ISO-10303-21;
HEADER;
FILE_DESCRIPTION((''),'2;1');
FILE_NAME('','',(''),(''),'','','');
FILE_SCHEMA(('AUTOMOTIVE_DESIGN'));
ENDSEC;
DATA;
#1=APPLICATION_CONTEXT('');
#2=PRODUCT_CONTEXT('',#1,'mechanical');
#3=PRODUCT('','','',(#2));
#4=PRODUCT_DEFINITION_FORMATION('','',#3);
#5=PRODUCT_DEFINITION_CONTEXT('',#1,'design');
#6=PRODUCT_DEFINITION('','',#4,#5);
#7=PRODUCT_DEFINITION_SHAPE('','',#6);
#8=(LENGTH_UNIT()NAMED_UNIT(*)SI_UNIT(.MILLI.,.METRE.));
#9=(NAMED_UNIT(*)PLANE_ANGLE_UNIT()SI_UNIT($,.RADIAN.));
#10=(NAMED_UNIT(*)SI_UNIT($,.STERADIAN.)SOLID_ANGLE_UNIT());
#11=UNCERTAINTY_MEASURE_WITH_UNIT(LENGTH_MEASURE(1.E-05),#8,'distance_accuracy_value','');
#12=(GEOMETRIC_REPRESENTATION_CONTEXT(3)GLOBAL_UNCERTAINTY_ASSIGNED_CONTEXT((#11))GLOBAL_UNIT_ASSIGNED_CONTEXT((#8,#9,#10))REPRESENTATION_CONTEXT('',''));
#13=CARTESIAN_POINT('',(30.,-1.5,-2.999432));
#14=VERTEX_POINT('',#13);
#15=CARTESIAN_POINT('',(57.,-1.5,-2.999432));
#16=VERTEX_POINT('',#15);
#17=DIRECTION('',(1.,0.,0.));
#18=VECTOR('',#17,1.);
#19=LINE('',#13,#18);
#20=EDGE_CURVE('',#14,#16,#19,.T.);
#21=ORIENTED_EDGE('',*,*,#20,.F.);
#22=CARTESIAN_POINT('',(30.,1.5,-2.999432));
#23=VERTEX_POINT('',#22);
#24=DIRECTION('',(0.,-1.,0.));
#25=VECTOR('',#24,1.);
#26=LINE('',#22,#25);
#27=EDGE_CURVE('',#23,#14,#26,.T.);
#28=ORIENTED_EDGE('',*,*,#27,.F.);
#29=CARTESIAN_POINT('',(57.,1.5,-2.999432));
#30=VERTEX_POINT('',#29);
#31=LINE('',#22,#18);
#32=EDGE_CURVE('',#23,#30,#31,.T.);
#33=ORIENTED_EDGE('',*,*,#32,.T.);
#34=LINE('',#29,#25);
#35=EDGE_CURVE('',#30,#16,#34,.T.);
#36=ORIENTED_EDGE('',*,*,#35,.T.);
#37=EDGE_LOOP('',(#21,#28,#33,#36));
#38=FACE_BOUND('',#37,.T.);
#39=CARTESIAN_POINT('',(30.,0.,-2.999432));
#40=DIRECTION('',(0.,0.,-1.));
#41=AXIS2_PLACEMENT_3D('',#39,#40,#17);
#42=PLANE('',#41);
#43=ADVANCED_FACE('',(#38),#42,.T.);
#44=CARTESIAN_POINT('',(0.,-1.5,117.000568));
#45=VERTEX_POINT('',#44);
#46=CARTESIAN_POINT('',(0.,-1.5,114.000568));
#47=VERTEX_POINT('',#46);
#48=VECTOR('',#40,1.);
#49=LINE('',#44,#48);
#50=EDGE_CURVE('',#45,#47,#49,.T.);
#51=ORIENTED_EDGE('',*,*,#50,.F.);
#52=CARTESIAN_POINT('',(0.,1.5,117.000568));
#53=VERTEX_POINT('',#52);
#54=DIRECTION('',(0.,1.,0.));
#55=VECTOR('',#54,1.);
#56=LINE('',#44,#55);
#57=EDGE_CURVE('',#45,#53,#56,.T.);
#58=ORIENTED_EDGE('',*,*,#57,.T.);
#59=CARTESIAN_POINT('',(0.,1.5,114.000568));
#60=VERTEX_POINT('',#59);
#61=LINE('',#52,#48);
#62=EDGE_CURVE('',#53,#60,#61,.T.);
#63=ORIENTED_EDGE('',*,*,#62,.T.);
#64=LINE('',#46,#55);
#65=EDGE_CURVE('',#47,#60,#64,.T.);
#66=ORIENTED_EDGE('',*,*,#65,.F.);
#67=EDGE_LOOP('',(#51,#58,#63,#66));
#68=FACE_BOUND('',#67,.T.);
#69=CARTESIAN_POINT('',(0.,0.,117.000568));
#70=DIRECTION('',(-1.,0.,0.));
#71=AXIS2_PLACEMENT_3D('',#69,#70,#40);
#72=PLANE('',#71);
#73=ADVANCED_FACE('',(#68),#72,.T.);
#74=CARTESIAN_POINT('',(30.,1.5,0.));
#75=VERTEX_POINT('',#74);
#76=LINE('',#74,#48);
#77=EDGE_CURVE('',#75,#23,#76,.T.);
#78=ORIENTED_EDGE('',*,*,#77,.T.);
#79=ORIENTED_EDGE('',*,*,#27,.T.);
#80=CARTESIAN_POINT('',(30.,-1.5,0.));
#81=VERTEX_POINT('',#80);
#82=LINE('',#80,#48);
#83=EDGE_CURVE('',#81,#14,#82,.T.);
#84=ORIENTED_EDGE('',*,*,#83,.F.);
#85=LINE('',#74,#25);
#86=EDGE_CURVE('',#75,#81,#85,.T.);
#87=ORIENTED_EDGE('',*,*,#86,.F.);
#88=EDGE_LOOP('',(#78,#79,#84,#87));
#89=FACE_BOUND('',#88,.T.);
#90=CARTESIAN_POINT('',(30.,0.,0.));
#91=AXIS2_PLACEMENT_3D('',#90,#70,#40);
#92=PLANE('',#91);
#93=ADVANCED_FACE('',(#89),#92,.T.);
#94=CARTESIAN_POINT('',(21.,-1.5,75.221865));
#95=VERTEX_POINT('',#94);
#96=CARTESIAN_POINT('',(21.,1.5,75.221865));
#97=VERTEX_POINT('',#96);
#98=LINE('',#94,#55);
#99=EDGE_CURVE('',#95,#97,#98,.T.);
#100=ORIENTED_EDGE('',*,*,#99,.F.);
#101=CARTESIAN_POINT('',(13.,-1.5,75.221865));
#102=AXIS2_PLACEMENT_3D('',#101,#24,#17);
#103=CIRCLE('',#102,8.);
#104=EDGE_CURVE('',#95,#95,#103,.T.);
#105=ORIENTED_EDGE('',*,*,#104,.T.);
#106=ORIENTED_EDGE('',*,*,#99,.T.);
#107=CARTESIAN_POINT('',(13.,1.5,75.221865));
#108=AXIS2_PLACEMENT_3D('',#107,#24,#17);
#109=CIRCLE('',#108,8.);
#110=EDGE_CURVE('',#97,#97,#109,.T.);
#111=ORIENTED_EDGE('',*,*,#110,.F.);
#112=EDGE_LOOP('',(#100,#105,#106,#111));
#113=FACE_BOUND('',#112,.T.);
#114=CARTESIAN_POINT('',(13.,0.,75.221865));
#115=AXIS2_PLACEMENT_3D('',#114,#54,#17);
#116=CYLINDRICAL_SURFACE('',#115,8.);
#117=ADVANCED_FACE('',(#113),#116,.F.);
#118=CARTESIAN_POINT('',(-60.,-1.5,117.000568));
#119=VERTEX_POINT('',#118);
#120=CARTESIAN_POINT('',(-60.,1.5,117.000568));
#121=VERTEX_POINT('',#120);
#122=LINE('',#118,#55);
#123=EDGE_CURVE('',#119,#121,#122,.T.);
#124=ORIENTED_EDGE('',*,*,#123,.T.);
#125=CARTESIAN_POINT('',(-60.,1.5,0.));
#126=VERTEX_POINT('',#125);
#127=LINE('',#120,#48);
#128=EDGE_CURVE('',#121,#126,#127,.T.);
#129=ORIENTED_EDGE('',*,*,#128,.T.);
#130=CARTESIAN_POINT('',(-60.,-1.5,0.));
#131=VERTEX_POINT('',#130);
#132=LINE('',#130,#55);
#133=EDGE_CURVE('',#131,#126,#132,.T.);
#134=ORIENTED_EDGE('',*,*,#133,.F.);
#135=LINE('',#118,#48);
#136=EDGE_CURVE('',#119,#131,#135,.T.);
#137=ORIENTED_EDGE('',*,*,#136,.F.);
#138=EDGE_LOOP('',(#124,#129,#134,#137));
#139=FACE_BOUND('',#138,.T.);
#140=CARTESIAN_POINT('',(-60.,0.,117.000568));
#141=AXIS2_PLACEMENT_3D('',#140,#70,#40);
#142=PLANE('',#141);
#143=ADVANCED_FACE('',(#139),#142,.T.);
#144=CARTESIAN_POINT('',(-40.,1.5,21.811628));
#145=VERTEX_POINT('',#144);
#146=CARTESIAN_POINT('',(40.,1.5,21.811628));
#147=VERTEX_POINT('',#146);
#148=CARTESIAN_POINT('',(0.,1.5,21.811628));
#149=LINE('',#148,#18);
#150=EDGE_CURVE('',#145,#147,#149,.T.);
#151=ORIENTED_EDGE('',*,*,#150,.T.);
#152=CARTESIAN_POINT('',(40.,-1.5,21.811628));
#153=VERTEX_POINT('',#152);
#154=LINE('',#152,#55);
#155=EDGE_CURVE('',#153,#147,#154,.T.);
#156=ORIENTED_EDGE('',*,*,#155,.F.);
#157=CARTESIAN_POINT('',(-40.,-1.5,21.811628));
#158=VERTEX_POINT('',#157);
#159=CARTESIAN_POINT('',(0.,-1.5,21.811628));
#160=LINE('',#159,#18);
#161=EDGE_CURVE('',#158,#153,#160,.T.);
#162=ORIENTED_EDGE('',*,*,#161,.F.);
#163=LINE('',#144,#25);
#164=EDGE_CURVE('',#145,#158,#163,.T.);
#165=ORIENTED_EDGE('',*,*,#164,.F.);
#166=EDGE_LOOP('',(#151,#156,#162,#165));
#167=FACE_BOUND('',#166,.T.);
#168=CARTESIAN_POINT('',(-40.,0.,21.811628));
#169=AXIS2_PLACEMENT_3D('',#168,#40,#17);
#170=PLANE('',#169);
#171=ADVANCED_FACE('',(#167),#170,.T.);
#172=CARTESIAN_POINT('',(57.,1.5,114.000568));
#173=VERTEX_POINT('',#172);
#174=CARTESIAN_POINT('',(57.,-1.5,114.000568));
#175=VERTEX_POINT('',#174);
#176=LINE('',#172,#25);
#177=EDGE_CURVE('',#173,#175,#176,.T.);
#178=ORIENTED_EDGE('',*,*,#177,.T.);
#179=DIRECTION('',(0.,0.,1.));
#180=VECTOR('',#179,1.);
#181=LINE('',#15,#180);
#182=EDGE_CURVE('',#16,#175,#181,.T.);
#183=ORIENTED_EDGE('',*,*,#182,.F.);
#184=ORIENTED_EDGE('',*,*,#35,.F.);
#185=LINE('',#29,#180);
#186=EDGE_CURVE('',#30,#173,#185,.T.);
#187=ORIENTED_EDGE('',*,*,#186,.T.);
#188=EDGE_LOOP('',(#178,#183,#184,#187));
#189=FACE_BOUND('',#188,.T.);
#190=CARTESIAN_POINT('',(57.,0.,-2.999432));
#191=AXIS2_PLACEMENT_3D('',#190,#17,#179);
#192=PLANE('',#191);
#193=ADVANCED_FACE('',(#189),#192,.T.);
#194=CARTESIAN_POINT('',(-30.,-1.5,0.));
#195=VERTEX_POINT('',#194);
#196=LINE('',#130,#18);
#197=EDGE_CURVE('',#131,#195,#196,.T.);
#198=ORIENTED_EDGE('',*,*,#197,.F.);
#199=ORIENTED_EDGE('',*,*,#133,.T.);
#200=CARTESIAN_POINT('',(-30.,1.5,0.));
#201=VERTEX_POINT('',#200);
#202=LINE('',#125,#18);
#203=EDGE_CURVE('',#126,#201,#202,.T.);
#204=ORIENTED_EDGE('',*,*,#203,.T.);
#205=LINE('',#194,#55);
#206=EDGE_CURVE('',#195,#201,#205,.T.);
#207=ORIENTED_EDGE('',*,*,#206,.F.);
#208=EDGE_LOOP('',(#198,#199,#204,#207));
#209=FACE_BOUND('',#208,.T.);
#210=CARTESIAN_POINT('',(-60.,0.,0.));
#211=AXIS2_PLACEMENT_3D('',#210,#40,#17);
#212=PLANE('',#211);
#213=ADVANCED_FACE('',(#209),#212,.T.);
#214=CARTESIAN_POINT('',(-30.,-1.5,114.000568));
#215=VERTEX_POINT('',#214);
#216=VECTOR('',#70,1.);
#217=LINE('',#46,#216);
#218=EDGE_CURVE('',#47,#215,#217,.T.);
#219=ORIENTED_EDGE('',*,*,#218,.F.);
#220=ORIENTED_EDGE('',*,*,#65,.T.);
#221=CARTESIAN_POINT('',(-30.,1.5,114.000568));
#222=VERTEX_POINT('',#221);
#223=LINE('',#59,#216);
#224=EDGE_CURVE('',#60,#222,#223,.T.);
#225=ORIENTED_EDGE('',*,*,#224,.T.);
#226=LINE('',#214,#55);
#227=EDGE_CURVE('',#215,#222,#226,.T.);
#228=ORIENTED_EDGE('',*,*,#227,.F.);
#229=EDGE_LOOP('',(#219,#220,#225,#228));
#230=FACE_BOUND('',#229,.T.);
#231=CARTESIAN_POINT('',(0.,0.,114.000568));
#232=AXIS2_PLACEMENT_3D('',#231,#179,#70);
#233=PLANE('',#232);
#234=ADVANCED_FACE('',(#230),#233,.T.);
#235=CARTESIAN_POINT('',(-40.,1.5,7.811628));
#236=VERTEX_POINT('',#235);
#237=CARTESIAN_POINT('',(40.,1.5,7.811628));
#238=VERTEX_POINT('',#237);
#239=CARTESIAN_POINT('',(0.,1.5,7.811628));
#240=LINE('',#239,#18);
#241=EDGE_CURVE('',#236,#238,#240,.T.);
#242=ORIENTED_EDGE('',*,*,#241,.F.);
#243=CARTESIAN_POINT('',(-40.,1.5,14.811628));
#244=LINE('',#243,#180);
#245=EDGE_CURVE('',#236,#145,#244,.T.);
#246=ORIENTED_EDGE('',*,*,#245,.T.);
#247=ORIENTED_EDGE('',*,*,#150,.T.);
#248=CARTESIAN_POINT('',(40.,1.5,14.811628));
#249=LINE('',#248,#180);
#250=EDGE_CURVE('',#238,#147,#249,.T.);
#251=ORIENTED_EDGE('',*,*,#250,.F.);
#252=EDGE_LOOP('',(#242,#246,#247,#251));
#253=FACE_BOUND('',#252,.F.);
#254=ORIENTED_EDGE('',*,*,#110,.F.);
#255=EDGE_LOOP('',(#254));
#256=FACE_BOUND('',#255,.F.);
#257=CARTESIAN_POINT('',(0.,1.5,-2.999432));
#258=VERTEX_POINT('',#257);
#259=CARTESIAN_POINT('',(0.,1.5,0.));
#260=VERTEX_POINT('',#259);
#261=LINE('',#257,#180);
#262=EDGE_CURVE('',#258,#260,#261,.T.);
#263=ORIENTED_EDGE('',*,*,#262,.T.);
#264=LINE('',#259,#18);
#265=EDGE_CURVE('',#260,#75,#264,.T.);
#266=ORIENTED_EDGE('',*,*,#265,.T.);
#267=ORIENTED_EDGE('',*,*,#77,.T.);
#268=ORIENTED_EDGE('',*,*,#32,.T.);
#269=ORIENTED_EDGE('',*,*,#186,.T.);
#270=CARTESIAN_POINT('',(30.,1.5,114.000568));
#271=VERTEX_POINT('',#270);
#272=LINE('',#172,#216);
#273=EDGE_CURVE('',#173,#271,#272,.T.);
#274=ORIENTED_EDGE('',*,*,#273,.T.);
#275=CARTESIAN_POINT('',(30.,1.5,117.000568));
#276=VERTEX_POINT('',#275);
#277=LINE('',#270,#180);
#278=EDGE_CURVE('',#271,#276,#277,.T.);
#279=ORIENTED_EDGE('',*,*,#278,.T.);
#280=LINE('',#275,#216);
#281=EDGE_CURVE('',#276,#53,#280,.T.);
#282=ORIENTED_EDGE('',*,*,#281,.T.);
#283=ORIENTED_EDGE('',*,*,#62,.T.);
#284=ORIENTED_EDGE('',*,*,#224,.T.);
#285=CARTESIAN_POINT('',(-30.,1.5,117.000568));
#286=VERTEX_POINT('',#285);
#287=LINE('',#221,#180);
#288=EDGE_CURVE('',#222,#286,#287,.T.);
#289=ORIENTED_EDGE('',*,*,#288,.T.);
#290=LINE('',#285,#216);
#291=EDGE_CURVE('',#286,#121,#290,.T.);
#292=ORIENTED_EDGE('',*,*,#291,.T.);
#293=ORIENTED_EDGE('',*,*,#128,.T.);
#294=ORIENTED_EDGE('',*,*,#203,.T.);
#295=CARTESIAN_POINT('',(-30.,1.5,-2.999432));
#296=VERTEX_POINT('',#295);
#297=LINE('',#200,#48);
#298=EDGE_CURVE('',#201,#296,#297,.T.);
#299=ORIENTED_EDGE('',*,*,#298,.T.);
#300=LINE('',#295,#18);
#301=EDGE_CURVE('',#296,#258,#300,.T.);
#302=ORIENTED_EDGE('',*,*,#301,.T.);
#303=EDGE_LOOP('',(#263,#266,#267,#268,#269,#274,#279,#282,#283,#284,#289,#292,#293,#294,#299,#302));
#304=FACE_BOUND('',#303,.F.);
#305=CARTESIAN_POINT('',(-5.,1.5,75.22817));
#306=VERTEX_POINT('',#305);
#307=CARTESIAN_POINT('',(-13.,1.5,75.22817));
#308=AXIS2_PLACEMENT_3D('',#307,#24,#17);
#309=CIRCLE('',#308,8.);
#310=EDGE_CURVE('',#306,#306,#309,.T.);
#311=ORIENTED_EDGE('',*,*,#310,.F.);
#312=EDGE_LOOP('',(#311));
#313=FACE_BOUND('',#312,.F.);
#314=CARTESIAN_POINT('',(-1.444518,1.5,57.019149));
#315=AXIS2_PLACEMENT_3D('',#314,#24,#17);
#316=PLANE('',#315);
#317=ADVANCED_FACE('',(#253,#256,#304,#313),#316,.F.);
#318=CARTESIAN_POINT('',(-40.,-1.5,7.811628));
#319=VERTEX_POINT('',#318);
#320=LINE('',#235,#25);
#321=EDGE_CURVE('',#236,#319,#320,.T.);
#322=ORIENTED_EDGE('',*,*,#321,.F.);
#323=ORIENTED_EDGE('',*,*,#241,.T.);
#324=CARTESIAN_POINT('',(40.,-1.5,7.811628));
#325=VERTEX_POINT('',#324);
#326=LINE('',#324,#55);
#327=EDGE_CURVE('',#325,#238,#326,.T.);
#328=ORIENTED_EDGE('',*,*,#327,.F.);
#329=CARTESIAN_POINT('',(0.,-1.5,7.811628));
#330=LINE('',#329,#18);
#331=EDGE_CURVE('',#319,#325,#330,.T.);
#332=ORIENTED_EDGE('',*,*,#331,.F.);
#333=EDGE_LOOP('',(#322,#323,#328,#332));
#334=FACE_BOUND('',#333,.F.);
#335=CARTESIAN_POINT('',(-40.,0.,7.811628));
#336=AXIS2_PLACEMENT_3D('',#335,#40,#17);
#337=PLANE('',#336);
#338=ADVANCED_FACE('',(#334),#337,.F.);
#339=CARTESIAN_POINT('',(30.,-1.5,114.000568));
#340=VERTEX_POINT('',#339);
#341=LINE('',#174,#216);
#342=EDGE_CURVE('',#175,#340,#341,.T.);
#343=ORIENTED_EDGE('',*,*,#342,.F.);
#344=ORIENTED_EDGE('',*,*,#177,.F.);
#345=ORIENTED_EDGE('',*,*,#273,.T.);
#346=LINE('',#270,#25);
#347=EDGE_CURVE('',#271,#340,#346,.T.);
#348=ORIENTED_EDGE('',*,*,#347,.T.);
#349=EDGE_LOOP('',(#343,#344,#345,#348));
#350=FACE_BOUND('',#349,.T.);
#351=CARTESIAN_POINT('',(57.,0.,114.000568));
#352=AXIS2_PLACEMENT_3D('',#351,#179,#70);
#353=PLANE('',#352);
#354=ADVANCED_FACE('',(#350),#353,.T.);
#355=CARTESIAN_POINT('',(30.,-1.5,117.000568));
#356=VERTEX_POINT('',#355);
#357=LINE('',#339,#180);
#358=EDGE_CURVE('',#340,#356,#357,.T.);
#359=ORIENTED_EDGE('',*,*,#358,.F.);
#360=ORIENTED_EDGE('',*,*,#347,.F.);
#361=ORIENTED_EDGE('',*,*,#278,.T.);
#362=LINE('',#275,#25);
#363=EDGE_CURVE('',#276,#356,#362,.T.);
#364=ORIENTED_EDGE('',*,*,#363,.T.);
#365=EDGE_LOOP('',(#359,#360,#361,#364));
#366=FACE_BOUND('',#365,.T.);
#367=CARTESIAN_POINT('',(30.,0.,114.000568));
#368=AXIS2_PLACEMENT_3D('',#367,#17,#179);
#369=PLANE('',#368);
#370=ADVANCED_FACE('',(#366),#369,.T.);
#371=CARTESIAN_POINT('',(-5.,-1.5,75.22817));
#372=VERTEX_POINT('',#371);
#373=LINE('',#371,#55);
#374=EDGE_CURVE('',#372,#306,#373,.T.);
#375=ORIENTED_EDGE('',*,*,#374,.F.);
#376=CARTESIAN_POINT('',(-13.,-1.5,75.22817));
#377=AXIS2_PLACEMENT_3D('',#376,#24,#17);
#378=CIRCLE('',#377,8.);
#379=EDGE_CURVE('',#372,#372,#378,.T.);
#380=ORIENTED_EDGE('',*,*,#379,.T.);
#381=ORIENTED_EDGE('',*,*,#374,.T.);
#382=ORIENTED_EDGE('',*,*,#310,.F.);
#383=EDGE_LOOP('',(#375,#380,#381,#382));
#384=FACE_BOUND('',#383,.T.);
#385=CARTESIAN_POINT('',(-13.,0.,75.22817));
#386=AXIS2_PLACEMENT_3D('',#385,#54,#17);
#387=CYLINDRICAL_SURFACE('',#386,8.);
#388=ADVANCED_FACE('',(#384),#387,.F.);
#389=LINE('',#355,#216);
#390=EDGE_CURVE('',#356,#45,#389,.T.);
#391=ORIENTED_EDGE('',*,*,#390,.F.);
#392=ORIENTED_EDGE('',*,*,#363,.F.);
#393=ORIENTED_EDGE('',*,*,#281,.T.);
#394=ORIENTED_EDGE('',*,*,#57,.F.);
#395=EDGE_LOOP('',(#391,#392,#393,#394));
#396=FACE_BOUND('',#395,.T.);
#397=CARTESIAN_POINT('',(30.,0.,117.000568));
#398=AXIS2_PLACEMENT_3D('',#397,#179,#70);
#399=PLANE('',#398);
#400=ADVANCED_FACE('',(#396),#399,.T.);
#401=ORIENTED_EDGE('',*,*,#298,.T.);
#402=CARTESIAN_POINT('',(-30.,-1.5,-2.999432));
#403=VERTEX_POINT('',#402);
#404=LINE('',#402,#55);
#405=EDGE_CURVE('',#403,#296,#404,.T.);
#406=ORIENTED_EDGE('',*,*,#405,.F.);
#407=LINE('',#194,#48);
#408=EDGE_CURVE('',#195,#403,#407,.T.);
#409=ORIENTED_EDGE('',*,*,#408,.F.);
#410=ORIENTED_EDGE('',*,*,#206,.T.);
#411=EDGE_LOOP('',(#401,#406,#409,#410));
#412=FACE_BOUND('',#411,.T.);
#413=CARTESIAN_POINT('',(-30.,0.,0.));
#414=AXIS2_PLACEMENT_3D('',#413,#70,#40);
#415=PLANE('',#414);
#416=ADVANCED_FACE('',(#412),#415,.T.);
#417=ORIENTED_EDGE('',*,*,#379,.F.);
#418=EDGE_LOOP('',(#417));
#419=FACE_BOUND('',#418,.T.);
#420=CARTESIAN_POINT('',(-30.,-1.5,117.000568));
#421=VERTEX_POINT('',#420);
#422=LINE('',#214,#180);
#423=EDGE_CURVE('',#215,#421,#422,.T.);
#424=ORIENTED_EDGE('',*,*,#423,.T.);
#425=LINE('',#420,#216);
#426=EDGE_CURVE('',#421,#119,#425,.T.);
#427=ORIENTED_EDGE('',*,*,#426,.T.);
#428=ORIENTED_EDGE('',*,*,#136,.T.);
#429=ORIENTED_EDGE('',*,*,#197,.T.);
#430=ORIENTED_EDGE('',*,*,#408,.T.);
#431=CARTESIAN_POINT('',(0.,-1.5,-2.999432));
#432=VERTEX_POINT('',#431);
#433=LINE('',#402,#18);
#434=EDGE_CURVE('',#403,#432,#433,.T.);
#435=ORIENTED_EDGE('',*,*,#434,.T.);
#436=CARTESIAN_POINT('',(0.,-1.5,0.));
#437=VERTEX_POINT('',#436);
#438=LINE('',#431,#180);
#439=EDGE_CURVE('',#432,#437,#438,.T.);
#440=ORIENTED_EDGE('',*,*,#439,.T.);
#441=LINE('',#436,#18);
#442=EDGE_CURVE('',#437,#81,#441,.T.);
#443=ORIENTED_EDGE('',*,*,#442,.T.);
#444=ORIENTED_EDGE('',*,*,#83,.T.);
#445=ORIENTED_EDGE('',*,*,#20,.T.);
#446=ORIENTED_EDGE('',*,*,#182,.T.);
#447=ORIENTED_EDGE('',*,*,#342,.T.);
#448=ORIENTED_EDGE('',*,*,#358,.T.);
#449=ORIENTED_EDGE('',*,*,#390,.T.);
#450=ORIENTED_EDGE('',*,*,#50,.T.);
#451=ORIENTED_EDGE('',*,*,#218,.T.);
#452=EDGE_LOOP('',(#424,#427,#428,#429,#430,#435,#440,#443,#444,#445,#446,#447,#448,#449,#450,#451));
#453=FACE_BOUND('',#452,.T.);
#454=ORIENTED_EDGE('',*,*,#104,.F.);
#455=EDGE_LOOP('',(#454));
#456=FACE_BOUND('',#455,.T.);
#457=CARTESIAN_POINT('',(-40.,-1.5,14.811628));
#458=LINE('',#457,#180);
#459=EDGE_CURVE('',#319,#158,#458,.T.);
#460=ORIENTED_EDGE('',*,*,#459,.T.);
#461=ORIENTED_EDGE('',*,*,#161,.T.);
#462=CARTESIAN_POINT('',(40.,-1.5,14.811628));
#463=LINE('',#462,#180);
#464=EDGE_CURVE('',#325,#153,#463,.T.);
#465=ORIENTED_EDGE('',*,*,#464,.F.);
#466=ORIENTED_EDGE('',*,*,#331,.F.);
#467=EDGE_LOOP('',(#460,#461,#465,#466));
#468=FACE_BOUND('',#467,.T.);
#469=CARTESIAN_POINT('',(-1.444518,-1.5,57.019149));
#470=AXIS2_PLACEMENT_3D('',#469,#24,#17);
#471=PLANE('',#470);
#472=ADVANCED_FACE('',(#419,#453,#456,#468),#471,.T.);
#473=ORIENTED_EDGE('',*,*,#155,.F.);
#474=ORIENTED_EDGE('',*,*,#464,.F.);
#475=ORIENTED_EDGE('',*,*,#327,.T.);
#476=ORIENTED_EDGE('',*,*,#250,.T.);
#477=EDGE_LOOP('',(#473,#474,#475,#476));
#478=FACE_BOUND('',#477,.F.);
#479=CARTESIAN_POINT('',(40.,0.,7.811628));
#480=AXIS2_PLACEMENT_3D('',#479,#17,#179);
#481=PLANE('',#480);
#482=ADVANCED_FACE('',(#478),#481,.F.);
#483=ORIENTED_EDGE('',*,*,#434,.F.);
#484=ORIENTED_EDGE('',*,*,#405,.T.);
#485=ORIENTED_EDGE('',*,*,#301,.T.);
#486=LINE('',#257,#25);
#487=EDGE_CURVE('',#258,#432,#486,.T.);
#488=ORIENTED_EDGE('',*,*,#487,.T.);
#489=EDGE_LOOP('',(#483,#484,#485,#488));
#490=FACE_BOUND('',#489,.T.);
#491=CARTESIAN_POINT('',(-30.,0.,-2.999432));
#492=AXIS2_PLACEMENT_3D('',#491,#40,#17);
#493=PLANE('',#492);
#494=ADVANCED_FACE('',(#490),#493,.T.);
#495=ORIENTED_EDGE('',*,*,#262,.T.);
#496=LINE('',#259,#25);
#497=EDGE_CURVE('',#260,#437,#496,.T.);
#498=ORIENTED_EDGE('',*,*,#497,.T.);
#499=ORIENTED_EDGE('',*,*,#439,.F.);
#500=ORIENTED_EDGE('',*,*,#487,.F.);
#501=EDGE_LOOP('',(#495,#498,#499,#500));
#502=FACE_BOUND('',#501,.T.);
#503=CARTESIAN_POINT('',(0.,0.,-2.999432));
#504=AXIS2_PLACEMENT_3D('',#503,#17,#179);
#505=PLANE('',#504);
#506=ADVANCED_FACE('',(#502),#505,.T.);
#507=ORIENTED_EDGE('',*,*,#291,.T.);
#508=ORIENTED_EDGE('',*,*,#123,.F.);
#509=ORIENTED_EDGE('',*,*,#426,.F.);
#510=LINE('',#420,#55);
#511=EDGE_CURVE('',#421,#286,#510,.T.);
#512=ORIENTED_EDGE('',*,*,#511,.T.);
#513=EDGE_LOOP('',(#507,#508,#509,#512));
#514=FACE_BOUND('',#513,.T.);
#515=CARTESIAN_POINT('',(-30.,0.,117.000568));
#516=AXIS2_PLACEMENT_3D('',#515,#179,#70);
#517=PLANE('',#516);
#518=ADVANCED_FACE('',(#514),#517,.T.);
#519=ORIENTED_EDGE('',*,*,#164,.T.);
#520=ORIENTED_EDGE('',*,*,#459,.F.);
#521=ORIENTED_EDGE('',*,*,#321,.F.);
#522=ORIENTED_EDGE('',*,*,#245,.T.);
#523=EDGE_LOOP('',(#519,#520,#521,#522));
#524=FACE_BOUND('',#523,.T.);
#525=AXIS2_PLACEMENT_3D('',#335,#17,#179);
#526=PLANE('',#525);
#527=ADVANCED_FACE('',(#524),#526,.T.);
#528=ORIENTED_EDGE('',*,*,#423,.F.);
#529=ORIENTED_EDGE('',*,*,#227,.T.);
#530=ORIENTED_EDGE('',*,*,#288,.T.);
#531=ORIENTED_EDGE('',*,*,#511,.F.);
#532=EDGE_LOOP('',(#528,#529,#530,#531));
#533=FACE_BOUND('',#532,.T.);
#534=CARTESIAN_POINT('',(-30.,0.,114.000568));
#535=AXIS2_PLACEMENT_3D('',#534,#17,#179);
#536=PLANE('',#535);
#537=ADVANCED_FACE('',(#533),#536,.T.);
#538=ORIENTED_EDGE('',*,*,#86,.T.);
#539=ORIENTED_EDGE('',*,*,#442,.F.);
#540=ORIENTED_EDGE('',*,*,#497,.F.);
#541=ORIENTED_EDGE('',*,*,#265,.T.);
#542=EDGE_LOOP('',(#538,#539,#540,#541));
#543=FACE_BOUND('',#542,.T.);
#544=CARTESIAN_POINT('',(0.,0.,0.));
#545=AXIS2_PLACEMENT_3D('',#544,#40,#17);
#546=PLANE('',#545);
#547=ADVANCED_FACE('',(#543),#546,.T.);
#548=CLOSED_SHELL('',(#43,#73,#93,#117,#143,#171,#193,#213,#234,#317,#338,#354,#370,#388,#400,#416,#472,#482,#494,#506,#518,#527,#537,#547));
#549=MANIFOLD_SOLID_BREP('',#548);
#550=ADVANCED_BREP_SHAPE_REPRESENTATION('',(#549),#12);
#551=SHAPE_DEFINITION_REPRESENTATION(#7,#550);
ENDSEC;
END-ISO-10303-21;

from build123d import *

# Parameters (mm, degrees)
F0_W     = 80
F0_H     = 14
F0_R     = 8
F1_DEPTH = 1.5


# Not quite as in the source:
# - a feature names something its author has since deleted; it is built from what else it names


with BuildPart() as f1:
    # F0 (on Front) → F1 (new body, symmetric)
    with BuildSketch(Plane.XZ):
        Polygon((-30, -2.9994321861), (0, -2.9994321861), (0, 0), (30, 0), (30, -2.9994321861), (57, -2.9994321861), (57, 114.0005678139), (30, 114.0005678139), (30, 117.0005678139), (0, 117.0005678139), (0, 114.0005678139), (-30, 114.0005678139), (-30, 117.0005678139), (-60, 117.0005678139), (-60, 0), (-30, 0), align=None)
        with Locations((0, 14.8116284981)):
            Rectangle(F0_W, F0_H, mode=Mode.SUBTRACT)
        with Locations((-13, 75.2281695604)):
            Circle(F0_R, mode=Mode.SUBTRACT)
        with Locations((13, 75.2218647463)):
            Circle(F0_R, mode=Mode.SUBTRACT)
    extrude(amount=F1_DEPTH, both=True)


solid = f1.part
